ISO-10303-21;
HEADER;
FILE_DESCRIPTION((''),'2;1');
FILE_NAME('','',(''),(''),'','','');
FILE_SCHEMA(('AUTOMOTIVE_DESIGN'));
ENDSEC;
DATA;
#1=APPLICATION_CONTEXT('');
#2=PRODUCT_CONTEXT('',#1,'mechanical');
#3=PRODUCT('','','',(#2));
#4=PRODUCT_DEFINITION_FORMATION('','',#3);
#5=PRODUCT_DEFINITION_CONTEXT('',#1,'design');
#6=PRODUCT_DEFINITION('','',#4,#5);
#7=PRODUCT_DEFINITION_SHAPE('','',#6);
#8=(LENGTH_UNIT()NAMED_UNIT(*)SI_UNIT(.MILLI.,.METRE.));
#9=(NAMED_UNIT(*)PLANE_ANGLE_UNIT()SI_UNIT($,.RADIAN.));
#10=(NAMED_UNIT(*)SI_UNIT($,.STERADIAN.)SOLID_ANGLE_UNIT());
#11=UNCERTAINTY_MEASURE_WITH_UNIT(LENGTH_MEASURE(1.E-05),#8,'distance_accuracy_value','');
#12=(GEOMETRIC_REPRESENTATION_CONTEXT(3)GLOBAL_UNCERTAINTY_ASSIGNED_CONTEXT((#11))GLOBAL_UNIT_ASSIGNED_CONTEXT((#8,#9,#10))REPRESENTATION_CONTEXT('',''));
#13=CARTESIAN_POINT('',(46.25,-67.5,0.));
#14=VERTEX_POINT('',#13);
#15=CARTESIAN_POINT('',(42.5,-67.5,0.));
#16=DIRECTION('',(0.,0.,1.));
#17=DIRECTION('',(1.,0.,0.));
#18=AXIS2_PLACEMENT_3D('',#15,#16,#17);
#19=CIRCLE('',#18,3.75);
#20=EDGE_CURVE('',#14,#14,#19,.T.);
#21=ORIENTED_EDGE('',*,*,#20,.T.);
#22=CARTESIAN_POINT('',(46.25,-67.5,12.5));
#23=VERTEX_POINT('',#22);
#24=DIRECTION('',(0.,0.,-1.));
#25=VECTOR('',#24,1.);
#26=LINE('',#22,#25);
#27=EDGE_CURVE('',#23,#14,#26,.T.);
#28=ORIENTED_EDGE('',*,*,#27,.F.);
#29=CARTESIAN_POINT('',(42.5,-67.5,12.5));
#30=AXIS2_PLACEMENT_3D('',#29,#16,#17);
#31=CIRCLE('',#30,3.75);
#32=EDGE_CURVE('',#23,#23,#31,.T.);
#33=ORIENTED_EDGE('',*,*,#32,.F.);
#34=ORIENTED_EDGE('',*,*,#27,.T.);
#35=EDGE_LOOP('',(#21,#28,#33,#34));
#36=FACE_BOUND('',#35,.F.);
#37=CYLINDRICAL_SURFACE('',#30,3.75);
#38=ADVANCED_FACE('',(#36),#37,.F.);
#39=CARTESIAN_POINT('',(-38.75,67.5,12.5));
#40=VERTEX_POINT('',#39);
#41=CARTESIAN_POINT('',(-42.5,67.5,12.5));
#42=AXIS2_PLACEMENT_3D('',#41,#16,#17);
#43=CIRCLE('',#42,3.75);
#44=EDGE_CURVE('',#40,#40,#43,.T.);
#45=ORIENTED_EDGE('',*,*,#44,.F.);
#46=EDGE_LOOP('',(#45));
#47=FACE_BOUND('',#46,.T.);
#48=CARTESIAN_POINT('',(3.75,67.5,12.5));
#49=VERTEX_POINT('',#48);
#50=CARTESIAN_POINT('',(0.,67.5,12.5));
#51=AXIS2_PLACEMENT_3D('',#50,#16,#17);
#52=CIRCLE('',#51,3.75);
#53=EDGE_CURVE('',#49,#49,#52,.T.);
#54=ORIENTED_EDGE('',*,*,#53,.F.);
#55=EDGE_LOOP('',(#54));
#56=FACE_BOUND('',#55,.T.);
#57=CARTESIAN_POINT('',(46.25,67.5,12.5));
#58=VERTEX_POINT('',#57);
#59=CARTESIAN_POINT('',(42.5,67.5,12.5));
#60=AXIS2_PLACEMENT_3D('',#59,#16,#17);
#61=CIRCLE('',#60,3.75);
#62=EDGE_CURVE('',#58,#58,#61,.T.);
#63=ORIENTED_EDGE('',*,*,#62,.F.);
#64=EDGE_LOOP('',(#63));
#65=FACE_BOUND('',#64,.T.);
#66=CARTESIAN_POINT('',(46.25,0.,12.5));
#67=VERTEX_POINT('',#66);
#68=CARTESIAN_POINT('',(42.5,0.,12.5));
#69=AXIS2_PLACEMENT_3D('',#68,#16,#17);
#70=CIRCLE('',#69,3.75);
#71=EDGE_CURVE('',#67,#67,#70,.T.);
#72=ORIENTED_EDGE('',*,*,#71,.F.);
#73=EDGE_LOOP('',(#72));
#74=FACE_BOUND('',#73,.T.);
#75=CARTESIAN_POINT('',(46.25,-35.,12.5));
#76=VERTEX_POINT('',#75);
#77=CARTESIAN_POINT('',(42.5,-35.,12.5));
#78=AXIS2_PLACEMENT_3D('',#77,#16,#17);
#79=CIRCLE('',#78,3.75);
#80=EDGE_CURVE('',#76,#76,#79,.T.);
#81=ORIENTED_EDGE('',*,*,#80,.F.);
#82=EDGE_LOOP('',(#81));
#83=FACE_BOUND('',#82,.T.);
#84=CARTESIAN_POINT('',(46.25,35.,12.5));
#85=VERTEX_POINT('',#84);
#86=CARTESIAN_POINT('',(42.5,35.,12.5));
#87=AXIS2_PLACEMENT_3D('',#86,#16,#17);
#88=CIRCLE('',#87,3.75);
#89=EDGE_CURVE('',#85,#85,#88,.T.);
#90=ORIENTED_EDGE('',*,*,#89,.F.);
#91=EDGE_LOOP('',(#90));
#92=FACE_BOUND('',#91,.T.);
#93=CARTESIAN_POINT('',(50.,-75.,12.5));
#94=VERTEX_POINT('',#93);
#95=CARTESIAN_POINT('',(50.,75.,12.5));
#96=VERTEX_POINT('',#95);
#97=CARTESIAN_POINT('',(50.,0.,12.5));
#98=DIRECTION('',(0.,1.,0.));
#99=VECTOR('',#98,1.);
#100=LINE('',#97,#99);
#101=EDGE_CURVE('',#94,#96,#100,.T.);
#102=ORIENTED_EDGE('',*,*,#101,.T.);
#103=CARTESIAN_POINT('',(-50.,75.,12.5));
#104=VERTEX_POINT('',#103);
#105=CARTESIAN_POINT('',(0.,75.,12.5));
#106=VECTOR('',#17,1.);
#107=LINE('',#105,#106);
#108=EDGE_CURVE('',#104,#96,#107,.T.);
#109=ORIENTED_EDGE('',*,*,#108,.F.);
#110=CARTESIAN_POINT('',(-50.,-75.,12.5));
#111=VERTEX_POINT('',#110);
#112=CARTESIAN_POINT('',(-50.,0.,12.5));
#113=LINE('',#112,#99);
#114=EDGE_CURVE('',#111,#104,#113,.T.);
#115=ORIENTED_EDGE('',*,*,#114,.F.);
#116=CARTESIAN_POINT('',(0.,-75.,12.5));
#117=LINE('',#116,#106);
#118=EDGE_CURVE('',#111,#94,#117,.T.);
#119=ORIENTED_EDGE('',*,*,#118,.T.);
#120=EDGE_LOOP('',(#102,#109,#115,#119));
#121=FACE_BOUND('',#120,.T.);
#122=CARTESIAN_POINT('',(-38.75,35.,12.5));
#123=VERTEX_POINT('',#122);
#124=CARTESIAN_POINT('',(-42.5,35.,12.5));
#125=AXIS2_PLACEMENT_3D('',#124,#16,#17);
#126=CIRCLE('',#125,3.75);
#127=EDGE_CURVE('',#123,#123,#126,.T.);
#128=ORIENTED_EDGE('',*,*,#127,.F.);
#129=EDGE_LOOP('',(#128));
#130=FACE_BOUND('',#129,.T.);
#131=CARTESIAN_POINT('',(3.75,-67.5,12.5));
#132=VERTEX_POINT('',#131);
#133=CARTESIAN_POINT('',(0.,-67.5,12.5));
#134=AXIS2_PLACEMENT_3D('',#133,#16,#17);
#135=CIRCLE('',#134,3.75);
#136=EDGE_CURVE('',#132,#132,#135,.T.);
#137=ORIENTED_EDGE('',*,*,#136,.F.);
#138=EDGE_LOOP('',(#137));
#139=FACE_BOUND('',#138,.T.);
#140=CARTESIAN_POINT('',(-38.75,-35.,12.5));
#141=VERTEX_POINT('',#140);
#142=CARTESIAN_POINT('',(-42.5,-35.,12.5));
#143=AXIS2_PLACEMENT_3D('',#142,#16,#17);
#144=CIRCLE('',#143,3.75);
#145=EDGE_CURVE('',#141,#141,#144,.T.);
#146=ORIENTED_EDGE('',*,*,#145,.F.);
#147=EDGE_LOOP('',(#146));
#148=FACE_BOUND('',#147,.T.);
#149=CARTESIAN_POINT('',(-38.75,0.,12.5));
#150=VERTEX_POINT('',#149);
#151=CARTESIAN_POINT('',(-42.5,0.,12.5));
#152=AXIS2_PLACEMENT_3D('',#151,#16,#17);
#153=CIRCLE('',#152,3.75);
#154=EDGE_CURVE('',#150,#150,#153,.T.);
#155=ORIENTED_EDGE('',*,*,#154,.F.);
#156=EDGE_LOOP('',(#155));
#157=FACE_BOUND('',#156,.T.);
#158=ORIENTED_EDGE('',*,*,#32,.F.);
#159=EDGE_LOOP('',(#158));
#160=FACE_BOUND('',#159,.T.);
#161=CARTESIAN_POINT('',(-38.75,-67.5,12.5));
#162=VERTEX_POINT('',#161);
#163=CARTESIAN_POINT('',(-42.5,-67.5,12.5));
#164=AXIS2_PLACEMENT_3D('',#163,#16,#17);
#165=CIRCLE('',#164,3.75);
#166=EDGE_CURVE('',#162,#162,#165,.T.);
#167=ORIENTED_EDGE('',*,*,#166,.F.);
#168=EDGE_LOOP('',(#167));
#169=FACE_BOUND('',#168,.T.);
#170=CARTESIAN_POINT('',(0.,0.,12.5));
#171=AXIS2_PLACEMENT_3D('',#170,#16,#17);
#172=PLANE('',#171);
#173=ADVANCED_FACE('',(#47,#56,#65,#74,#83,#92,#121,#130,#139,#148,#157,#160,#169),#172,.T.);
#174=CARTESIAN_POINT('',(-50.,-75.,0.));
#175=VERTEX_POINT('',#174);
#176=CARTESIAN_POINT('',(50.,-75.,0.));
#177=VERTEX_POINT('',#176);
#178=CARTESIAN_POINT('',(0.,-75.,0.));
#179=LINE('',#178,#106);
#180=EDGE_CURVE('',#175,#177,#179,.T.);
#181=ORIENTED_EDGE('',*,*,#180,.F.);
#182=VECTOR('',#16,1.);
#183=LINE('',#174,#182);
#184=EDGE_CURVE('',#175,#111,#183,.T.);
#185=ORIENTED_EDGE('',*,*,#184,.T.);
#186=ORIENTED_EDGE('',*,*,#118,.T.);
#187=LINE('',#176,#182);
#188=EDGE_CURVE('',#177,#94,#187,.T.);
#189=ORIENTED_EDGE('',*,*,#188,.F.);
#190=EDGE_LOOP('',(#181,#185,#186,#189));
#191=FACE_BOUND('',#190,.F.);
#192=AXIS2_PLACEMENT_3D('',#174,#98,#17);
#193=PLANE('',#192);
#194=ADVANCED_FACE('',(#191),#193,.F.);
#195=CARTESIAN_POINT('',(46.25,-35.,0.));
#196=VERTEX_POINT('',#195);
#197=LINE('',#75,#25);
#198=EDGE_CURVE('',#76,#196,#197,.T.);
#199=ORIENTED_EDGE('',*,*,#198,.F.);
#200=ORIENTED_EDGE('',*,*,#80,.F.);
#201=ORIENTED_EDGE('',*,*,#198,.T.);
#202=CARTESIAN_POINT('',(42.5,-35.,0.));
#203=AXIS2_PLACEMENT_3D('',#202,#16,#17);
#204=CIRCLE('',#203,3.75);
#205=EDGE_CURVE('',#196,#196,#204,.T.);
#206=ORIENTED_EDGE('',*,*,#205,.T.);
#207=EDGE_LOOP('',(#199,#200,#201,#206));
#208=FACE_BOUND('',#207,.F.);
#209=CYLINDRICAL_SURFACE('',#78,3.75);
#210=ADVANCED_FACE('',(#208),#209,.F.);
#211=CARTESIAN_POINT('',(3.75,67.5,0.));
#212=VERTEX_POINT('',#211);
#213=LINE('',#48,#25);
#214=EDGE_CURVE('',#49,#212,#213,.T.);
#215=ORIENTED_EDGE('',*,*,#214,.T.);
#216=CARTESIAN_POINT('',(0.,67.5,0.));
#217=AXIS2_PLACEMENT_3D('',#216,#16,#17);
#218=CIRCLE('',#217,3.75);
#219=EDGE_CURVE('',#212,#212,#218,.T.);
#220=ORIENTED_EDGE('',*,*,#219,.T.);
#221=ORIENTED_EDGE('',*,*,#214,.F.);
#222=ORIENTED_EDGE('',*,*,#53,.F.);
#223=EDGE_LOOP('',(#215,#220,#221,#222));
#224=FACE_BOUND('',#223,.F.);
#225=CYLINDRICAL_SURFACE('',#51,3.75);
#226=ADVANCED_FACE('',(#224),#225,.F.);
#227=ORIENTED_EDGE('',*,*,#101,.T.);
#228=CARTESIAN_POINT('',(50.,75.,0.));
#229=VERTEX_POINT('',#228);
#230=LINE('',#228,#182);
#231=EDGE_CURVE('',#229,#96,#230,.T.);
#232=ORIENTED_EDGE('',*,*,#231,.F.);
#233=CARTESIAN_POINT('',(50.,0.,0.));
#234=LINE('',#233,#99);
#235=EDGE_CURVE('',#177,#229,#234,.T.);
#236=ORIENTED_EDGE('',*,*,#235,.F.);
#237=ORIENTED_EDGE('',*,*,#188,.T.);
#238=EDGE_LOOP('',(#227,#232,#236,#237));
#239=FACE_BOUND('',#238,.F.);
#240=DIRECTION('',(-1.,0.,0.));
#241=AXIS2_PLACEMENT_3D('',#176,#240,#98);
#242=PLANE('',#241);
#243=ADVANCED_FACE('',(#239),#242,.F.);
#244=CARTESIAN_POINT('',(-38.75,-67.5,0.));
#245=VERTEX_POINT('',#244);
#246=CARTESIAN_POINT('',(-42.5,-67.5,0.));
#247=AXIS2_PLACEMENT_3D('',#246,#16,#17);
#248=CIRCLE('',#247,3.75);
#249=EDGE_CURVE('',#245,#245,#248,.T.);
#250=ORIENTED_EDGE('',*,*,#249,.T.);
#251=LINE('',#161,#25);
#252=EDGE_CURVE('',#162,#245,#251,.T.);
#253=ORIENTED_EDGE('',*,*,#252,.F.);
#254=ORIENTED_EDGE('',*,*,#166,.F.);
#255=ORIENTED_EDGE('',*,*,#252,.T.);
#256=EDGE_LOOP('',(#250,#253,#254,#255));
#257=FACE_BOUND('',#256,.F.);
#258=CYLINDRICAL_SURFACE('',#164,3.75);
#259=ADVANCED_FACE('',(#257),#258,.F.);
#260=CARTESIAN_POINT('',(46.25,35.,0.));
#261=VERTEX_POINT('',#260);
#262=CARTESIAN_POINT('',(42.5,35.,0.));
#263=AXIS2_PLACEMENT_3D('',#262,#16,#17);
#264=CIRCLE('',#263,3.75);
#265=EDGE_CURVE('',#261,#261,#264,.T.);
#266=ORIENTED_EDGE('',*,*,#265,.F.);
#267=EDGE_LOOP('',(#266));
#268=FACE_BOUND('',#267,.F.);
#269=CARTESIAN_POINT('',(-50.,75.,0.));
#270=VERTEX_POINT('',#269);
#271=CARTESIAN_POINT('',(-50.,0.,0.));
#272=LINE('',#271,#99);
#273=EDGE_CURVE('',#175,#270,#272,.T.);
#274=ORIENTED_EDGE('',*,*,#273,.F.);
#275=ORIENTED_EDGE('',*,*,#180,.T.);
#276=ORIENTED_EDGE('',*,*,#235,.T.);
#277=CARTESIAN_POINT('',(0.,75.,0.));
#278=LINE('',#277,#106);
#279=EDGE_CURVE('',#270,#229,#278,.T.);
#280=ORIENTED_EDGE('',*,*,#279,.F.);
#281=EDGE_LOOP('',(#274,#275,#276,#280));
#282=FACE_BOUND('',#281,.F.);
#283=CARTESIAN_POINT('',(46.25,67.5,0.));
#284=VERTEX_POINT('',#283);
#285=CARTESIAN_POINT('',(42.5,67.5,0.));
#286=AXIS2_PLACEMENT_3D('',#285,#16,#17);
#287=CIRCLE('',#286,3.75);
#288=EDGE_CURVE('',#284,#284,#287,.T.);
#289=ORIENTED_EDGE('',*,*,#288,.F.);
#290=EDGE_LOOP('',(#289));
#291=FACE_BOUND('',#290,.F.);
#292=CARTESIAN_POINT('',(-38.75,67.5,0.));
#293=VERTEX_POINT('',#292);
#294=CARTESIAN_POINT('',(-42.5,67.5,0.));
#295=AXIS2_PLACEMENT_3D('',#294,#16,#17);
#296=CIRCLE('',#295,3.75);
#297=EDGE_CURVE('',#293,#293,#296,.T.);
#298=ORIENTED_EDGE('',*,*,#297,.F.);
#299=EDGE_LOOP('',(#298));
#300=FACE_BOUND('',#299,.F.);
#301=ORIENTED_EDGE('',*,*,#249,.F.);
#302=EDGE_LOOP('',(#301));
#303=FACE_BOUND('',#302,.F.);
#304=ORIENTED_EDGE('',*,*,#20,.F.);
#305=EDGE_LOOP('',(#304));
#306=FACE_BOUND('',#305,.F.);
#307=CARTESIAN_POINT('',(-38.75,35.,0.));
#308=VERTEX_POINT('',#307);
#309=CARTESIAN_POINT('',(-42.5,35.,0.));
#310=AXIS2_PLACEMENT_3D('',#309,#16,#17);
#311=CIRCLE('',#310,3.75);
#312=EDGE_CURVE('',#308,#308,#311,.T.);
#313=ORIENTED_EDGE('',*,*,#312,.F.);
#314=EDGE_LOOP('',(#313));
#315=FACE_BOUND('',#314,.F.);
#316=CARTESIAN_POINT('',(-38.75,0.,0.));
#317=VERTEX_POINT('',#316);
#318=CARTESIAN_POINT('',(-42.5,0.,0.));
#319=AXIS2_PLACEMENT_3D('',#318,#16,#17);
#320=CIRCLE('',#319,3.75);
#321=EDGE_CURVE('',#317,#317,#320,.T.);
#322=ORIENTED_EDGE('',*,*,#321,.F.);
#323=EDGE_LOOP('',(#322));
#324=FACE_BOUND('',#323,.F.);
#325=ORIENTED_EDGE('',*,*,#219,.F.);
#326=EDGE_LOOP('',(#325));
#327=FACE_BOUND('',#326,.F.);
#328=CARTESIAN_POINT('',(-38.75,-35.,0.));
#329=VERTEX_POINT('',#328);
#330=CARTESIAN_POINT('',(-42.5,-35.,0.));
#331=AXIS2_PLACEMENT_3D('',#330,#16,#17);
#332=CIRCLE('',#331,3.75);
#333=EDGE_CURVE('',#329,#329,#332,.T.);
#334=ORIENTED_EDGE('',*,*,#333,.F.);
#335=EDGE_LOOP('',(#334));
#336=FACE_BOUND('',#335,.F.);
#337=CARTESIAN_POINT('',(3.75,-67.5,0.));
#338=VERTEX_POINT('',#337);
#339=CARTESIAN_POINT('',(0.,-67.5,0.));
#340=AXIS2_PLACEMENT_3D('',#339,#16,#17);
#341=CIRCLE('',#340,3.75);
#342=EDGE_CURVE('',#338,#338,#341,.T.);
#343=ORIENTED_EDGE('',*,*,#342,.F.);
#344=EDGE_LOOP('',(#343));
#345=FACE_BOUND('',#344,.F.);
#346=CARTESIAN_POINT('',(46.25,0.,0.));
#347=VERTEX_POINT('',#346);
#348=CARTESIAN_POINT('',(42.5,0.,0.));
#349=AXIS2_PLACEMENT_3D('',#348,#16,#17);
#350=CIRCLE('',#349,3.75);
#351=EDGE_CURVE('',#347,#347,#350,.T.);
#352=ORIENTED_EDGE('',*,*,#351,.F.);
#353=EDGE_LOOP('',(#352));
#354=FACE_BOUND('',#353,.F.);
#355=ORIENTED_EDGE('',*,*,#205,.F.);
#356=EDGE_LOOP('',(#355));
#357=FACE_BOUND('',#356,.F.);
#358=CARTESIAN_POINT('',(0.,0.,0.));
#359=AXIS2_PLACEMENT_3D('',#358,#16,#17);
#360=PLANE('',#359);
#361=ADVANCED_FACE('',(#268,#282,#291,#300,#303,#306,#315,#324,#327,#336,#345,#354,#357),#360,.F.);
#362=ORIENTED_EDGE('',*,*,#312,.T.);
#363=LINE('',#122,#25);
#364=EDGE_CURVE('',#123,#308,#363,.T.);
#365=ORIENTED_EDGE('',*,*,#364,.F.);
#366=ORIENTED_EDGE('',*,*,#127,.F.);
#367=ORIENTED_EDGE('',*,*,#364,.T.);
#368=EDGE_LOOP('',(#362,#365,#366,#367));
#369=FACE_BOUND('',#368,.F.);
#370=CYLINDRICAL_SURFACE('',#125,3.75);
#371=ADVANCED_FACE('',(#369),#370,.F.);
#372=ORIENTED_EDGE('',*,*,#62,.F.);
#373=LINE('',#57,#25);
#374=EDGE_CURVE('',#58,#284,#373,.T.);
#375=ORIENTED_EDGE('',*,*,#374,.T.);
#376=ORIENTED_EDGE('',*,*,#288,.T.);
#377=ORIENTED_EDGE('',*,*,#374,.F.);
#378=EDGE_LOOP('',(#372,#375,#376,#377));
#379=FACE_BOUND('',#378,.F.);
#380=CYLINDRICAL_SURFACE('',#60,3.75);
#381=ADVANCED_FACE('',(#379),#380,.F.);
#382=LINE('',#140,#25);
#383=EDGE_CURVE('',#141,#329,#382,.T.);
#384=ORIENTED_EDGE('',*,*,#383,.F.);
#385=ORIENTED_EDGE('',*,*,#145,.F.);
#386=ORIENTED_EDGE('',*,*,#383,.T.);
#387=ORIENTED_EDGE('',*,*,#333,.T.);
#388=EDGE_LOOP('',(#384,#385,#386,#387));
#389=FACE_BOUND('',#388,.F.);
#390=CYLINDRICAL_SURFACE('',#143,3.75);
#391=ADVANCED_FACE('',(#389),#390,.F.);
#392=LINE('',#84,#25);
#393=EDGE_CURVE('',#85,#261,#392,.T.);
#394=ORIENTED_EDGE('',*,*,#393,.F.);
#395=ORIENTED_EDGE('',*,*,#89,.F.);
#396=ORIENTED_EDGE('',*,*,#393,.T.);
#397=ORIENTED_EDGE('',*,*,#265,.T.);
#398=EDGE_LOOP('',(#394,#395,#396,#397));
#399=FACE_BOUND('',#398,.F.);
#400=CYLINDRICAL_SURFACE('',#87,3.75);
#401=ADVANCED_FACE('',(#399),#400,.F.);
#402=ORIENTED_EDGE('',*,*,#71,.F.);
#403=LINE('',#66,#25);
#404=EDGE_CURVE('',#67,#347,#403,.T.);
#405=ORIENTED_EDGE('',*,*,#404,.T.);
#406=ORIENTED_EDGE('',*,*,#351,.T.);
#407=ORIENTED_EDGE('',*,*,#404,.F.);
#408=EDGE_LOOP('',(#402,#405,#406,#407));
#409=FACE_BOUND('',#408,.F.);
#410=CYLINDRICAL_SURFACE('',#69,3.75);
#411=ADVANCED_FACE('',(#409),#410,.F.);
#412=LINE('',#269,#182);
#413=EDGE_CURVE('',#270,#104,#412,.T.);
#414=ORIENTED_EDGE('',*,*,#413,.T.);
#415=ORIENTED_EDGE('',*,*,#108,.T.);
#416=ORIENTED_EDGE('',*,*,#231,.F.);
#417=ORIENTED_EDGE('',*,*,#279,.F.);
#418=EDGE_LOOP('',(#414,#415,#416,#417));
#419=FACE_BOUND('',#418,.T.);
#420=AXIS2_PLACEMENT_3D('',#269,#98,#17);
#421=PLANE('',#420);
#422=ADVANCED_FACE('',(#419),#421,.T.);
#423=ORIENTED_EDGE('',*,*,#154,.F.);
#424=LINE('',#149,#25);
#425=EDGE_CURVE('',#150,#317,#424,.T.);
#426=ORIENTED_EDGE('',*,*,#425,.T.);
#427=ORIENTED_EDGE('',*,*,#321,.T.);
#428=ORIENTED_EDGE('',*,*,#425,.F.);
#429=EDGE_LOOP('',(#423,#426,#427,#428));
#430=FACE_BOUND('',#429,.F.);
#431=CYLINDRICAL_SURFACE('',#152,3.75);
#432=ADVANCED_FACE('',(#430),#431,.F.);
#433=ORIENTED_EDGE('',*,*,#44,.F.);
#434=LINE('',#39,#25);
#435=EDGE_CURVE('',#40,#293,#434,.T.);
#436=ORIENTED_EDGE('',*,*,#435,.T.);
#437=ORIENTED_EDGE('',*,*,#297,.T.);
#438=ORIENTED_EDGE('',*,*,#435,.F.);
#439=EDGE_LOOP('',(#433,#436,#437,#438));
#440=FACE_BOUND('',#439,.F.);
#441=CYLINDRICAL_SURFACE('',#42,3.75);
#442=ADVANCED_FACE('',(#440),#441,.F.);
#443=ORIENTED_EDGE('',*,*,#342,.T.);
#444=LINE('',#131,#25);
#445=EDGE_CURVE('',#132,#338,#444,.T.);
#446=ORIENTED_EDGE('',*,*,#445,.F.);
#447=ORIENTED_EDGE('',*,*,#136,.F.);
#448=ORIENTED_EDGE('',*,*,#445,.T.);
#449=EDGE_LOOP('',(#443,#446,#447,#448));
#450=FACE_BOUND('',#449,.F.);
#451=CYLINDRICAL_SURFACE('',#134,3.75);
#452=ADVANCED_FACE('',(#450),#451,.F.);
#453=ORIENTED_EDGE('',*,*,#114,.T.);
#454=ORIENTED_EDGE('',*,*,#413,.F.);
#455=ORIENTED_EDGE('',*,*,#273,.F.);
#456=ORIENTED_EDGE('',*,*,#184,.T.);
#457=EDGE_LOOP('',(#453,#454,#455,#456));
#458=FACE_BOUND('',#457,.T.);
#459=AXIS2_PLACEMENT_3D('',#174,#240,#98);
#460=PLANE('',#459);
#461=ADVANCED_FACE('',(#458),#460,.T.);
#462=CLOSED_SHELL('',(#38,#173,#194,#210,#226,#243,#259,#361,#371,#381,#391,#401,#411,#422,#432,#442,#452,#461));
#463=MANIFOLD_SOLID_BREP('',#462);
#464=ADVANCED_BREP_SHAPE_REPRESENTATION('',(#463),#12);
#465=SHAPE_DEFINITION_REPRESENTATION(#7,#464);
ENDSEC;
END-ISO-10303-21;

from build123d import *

# Parameters (mm, degrees)
F0_W     = 100
F0_H     = 150
F1_DEPTH = 12.5
F2_R     = 3.75
F3_DEPTH = 25


# Not quite as in the source:
# - a feature names something its author has since deleted; it is built from what else it names


with BuildPart() as f1:
    # F0 (on Top) → F1 (new body)
    with BuildSketch(Plane.XY):
        Rectangle(F0_W, F0_H)
    extrude(amount=F1_DEPTH)

    # F2 (on face) → F3 (cut)
    with BuildSketch(Plane.XY.offset(12.5)):
        with Locations((-42.5, 67.5)):
            Circle(F2_R)
        with Locations((-42.5, 0)):
            Circle(F2_R)
        with Locations((-42.5, -35)):
            Circle(F2_R)
        with Locations((-42.5, -67.5)):
            Circle(F2_R)
        with Locations((0, -67.5)):
            Circle(F2_R)
        with Locations((-42.5, 35)):
            Circle(F2_R)
        with Locations((42.5, -67.5)):
            Circle(F2_R)
        with Locations((42.5, -35)):
            Circle(F2_R)
        with Locations((42.5, 0)):
            Circle(F2_R)
        with Locations((42.5, 35)):
            Circle(F2_R)
        with Locations((42.5, 67.5)):
            Circle(F2_R)
        with Locations((0, 67.5)):
            Circle(F2_R)
    extrude(amount=-F3_DEPTH, mode=Mode.SUBTRACT)


solid = f1.part
